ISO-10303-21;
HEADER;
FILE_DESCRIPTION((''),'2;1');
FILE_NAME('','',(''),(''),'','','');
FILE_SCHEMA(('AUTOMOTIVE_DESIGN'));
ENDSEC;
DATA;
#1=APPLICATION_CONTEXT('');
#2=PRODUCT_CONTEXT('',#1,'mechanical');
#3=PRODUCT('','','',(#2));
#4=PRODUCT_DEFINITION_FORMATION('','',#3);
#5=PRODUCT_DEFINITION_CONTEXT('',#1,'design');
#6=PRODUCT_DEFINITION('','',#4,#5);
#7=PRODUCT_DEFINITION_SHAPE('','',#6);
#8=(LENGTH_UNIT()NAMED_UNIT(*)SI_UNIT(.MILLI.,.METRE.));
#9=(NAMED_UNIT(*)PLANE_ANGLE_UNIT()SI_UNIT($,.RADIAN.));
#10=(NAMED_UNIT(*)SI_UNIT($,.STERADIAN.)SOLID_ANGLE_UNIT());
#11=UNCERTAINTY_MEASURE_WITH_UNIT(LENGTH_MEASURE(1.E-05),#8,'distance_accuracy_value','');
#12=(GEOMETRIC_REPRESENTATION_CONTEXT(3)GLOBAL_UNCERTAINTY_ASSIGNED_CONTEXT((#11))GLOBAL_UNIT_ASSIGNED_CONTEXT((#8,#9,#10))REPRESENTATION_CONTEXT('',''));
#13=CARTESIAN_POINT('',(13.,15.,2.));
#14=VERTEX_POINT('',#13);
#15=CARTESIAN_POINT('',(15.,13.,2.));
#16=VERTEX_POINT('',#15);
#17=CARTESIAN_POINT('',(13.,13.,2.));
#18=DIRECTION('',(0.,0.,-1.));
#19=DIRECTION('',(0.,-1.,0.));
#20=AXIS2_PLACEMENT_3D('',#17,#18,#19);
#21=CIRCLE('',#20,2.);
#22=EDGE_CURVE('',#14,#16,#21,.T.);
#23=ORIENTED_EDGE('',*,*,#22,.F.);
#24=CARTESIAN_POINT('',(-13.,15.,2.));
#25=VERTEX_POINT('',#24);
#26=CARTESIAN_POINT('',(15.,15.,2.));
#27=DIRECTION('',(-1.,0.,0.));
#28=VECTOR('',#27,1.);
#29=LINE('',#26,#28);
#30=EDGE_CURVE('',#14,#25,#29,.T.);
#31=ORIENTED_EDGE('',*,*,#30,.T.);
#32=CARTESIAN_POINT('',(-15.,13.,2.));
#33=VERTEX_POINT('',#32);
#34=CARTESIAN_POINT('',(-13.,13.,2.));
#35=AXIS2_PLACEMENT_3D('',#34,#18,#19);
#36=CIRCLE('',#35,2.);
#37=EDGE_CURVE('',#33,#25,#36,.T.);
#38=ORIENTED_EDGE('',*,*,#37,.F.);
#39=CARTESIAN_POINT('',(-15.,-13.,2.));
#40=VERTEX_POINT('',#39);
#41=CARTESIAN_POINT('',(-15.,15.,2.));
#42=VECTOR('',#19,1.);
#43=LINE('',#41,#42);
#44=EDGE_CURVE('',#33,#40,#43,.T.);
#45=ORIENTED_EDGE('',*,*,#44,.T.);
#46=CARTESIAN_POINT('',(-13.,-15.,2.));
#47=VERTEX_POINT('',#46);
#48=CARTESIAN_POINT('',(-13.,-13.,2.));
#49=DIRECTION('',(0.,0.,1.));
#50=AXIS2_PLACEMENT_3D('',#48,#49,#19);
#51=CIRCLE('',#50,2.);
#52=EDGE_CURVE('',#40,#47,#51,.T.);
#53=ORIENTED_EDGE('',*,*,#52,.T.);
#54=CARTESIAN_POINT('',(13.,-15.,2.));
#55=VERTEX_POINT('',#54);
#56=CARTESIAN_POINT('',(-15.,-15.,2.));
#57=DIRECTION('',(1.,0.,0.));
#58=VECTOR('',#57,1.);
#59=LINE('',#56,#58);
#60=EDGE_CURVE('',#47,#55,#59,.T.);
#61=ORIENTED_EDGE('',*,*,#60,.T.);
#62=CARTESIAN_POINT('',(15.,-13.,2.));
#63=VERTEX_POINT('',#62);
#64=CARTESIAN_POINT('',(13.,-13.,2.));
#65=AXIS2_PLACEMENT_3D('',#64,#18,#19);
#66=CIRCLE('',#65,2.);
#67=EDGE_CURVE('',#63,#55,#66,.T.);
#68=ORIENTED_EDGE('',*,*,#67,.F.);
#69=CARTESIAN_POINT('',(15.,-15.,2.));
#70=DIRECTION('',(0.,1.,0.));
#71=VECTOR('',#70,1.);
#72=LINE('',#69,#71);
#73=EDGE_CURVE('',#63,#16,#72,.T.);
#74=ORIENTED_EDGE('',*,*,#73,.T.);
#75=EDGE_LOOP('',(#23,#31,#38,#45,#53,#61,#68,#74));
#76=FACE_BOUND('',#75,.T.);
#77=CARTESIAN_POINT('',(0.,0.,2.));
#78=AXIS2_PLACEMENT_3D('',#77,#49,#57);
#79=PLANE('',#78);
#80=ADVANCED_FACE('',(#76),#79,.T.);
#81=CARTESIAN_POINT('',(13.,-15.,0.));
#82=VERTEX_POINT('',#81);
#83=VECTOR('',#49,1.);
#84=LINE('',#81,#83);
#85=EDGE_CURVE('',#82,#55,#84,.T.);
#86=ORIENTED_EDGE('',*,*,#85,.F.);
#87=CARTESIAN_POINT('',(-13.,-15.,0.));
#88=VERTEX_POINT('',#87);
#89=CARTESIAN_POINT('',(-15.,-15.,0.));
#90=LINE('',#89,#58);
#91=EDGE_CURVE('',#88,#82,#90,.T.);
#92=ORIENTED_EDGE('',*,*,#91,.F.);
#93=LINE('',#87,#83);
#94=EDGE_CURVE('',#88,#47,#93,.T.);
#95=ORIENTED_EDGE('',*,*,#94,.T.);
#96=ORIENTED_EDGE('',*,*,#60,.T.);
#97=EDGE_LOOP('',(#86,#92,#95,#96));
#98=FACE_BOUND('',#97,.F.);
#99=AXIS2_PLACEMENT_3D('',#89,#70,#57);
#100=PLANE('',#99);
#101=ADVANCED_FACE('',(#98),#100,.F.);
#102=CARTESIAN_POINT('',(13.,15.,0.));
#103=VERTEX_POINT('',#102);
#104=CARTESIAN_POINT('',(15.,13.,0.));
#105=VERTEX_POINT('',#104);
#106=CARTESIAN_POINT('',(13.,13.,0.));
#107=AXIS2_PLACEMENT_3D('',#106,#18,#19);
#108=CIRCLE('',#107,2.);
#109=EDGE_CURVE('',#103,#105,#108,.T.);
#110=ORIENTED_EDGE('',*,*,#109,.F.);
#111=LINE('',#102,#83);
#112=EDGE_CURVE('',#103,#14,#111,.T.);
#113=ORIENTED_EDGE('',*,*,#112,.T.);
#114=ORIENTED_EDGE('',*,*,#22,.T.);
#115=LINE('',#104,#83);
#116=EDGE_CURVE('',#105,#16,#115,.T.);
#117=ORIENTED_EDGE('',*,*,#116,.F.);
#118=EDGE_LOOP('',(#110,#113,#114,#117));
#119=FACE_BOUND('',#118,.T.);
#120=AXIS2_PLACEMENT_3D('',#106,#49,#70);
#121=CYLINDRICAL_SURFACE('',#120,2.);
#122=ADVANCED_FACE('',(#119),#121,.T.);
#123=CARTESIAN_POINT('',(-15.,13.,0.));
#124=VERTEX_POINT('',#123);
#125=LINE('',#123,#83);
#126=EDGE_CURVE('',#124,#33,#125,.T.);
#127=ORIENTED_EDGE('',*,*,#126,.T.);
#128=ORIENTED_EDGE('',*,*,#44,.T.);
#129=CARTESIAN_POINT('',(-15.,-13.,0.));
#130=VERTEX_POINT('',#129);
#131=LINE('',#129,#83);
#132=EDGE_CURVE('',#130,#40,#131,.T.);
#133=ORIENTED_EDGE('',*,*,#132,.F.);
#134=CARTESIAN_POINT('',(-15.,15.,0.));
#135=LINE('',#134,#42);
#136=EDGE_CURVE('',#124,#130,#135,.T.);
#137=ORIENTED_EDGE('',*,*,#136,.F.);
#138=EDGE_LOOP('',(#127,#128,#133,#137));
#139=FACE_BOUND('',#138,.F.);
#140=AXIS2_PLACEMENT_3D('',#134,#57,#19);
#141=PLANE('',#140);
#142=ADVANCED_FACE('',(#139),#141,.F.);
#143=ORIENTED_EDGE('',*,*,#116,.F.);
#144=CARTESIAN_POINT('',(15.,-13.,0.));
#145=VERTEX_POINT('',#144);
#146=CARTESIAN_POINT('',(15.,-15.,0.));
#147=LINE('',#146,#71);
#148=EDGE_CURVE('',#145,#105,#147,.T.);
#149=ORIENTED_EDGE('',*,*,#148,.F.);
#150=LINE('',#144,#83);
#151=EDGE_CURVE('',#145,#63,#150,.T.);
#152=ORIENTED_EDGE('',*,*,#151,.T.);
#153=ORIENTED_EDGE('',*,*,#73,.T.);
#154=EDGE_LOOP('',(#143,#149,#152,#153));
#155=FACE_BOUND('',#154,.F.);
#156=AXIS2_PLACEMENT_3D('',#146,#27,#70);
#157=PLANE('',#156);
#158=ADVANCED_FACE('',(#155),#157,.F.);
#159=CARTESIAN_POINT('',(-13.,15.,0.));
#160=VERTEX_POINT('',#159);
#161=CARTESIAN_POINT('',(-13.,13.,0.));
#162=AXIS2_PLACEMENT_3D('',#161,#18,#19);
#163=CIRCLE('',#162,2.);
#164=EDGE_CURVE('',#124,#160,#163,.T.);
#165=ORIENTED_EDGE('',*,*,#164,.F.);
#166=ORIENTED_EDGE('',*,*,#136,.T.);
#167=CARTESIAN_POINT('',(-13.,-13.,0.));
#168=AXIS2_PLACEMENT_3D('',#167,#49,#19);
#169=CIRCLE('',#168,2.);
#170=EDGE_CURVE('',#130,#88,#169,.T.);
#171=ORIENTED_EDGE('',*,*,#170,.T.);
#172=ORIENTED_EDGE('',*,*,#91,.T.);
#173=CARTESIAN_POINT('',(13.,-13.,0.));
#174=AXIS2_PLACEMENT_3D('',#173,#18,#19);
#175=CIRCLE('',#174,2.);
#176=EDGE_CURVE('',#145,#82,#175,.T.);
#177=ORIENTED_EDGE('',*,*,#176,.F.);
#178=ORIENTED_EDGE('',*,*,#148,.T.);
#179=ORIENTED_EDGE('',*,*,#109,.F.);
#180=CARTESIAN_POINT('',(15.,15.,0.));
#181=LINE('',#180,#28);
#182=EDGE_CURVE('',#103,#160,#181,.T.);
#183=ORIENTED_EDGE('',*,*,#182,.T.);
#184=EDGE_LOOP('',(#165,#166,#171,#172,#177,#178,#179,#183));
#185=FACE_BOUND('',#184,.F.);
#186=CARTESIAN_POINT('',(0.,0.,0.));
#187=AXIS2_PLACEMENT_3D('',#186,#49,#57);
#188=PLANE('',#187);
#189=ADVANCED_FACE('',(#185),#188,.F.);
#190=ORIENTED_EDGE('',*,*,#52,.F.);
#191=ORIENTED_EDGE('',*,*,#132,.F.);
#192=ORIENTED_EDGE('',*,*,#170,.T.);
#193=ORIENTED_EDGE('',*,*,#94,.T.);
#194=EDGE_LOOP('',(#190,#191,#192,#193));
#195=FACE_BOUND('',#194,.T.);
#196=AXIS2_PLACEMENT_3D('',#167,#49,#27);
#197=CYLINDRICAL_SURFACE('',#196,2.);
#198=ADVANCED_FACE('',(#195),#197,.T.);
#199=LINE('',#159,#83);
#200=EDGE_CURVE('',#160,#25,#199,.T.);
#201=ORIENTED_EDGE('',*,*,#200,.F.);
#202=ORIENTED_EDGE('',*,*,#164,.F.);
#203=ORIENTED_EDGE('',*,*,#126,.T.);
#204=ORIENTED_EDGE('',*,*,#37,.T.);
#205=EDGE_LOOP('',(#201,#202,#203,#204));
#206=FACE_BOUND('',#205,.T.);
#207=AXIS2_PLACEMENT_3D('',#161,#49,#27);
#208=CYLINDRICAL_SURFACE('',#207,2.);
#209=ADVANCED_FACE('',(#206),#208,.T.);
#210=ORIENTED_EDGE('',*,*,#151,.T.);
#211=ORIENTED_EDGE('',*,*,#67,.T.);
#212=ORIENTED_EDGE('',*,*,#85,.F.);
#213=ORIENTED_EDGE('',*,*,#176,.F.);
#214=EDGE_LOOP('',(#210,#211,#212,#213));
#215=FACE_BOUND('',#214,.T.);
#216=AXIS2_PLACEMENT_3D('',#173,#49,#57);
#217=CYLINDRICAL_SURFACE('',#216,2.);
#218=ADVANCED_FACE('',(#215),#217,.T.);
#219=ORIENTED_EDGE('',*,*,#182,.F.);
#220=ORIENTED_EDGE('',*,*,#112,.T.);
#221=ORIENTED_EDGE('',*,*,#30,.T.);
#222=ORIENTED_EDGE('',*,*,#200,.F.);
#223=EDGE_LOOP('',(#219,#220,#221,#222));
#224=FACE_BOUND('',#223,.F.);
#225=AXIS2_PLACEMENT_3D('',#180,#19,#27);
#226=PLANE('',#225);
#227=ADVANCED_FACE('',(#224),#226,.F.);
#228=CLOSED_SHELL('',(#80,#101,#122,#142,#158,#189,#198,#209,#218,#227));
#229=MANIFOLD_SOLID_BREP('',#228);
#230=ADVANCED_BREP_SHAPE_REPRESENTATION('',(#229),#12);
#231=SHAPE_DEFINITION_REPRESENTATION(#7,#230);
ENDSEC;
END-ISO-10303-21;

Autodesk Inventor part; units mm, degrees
ref_plane "YZ Plane" through (0, 0, 0) normal (1, 0, 0) x (0, 1, 0)
ref_plane "XZ Plane" through (0, 0, 0) normal (0, 1, 0) x (-1, 0, 0)
ref_plane "XY Plane" through (0, 0, 0) normal (0, 0, 1) x (1, 0, 0)
sketch "Sketch1" plane through (0, 0, 0) normal (0, 0, 1) x (1, 0, 0)
  line L0 (-15, -15) -> (15, -15)
  line L1 (15, -15) -> (15, 15)
  line L2 (15, 15) -> (-15, 15)
  line L3 (-15, 15) -> (-15, -15)
  line L4 (-15, -15) -> (15, 15) construction
  line L5 (15, -15) -> (-15, 15) construction
  point P0 (0, 0)
  dimension "d154" = 30
  dimension "d155" = 30
extrude "Plate5" add sketch "Sketch1" along normal blind 2
fillet "Corner Round1" radius 2 4 edges at (15, 15, 1) (-15, 15, 1) (-15, -15, 1) (15, -15, 1)
properties part number "TZS 766 FDS 940 CUP 1" material "Stainless Steel"
